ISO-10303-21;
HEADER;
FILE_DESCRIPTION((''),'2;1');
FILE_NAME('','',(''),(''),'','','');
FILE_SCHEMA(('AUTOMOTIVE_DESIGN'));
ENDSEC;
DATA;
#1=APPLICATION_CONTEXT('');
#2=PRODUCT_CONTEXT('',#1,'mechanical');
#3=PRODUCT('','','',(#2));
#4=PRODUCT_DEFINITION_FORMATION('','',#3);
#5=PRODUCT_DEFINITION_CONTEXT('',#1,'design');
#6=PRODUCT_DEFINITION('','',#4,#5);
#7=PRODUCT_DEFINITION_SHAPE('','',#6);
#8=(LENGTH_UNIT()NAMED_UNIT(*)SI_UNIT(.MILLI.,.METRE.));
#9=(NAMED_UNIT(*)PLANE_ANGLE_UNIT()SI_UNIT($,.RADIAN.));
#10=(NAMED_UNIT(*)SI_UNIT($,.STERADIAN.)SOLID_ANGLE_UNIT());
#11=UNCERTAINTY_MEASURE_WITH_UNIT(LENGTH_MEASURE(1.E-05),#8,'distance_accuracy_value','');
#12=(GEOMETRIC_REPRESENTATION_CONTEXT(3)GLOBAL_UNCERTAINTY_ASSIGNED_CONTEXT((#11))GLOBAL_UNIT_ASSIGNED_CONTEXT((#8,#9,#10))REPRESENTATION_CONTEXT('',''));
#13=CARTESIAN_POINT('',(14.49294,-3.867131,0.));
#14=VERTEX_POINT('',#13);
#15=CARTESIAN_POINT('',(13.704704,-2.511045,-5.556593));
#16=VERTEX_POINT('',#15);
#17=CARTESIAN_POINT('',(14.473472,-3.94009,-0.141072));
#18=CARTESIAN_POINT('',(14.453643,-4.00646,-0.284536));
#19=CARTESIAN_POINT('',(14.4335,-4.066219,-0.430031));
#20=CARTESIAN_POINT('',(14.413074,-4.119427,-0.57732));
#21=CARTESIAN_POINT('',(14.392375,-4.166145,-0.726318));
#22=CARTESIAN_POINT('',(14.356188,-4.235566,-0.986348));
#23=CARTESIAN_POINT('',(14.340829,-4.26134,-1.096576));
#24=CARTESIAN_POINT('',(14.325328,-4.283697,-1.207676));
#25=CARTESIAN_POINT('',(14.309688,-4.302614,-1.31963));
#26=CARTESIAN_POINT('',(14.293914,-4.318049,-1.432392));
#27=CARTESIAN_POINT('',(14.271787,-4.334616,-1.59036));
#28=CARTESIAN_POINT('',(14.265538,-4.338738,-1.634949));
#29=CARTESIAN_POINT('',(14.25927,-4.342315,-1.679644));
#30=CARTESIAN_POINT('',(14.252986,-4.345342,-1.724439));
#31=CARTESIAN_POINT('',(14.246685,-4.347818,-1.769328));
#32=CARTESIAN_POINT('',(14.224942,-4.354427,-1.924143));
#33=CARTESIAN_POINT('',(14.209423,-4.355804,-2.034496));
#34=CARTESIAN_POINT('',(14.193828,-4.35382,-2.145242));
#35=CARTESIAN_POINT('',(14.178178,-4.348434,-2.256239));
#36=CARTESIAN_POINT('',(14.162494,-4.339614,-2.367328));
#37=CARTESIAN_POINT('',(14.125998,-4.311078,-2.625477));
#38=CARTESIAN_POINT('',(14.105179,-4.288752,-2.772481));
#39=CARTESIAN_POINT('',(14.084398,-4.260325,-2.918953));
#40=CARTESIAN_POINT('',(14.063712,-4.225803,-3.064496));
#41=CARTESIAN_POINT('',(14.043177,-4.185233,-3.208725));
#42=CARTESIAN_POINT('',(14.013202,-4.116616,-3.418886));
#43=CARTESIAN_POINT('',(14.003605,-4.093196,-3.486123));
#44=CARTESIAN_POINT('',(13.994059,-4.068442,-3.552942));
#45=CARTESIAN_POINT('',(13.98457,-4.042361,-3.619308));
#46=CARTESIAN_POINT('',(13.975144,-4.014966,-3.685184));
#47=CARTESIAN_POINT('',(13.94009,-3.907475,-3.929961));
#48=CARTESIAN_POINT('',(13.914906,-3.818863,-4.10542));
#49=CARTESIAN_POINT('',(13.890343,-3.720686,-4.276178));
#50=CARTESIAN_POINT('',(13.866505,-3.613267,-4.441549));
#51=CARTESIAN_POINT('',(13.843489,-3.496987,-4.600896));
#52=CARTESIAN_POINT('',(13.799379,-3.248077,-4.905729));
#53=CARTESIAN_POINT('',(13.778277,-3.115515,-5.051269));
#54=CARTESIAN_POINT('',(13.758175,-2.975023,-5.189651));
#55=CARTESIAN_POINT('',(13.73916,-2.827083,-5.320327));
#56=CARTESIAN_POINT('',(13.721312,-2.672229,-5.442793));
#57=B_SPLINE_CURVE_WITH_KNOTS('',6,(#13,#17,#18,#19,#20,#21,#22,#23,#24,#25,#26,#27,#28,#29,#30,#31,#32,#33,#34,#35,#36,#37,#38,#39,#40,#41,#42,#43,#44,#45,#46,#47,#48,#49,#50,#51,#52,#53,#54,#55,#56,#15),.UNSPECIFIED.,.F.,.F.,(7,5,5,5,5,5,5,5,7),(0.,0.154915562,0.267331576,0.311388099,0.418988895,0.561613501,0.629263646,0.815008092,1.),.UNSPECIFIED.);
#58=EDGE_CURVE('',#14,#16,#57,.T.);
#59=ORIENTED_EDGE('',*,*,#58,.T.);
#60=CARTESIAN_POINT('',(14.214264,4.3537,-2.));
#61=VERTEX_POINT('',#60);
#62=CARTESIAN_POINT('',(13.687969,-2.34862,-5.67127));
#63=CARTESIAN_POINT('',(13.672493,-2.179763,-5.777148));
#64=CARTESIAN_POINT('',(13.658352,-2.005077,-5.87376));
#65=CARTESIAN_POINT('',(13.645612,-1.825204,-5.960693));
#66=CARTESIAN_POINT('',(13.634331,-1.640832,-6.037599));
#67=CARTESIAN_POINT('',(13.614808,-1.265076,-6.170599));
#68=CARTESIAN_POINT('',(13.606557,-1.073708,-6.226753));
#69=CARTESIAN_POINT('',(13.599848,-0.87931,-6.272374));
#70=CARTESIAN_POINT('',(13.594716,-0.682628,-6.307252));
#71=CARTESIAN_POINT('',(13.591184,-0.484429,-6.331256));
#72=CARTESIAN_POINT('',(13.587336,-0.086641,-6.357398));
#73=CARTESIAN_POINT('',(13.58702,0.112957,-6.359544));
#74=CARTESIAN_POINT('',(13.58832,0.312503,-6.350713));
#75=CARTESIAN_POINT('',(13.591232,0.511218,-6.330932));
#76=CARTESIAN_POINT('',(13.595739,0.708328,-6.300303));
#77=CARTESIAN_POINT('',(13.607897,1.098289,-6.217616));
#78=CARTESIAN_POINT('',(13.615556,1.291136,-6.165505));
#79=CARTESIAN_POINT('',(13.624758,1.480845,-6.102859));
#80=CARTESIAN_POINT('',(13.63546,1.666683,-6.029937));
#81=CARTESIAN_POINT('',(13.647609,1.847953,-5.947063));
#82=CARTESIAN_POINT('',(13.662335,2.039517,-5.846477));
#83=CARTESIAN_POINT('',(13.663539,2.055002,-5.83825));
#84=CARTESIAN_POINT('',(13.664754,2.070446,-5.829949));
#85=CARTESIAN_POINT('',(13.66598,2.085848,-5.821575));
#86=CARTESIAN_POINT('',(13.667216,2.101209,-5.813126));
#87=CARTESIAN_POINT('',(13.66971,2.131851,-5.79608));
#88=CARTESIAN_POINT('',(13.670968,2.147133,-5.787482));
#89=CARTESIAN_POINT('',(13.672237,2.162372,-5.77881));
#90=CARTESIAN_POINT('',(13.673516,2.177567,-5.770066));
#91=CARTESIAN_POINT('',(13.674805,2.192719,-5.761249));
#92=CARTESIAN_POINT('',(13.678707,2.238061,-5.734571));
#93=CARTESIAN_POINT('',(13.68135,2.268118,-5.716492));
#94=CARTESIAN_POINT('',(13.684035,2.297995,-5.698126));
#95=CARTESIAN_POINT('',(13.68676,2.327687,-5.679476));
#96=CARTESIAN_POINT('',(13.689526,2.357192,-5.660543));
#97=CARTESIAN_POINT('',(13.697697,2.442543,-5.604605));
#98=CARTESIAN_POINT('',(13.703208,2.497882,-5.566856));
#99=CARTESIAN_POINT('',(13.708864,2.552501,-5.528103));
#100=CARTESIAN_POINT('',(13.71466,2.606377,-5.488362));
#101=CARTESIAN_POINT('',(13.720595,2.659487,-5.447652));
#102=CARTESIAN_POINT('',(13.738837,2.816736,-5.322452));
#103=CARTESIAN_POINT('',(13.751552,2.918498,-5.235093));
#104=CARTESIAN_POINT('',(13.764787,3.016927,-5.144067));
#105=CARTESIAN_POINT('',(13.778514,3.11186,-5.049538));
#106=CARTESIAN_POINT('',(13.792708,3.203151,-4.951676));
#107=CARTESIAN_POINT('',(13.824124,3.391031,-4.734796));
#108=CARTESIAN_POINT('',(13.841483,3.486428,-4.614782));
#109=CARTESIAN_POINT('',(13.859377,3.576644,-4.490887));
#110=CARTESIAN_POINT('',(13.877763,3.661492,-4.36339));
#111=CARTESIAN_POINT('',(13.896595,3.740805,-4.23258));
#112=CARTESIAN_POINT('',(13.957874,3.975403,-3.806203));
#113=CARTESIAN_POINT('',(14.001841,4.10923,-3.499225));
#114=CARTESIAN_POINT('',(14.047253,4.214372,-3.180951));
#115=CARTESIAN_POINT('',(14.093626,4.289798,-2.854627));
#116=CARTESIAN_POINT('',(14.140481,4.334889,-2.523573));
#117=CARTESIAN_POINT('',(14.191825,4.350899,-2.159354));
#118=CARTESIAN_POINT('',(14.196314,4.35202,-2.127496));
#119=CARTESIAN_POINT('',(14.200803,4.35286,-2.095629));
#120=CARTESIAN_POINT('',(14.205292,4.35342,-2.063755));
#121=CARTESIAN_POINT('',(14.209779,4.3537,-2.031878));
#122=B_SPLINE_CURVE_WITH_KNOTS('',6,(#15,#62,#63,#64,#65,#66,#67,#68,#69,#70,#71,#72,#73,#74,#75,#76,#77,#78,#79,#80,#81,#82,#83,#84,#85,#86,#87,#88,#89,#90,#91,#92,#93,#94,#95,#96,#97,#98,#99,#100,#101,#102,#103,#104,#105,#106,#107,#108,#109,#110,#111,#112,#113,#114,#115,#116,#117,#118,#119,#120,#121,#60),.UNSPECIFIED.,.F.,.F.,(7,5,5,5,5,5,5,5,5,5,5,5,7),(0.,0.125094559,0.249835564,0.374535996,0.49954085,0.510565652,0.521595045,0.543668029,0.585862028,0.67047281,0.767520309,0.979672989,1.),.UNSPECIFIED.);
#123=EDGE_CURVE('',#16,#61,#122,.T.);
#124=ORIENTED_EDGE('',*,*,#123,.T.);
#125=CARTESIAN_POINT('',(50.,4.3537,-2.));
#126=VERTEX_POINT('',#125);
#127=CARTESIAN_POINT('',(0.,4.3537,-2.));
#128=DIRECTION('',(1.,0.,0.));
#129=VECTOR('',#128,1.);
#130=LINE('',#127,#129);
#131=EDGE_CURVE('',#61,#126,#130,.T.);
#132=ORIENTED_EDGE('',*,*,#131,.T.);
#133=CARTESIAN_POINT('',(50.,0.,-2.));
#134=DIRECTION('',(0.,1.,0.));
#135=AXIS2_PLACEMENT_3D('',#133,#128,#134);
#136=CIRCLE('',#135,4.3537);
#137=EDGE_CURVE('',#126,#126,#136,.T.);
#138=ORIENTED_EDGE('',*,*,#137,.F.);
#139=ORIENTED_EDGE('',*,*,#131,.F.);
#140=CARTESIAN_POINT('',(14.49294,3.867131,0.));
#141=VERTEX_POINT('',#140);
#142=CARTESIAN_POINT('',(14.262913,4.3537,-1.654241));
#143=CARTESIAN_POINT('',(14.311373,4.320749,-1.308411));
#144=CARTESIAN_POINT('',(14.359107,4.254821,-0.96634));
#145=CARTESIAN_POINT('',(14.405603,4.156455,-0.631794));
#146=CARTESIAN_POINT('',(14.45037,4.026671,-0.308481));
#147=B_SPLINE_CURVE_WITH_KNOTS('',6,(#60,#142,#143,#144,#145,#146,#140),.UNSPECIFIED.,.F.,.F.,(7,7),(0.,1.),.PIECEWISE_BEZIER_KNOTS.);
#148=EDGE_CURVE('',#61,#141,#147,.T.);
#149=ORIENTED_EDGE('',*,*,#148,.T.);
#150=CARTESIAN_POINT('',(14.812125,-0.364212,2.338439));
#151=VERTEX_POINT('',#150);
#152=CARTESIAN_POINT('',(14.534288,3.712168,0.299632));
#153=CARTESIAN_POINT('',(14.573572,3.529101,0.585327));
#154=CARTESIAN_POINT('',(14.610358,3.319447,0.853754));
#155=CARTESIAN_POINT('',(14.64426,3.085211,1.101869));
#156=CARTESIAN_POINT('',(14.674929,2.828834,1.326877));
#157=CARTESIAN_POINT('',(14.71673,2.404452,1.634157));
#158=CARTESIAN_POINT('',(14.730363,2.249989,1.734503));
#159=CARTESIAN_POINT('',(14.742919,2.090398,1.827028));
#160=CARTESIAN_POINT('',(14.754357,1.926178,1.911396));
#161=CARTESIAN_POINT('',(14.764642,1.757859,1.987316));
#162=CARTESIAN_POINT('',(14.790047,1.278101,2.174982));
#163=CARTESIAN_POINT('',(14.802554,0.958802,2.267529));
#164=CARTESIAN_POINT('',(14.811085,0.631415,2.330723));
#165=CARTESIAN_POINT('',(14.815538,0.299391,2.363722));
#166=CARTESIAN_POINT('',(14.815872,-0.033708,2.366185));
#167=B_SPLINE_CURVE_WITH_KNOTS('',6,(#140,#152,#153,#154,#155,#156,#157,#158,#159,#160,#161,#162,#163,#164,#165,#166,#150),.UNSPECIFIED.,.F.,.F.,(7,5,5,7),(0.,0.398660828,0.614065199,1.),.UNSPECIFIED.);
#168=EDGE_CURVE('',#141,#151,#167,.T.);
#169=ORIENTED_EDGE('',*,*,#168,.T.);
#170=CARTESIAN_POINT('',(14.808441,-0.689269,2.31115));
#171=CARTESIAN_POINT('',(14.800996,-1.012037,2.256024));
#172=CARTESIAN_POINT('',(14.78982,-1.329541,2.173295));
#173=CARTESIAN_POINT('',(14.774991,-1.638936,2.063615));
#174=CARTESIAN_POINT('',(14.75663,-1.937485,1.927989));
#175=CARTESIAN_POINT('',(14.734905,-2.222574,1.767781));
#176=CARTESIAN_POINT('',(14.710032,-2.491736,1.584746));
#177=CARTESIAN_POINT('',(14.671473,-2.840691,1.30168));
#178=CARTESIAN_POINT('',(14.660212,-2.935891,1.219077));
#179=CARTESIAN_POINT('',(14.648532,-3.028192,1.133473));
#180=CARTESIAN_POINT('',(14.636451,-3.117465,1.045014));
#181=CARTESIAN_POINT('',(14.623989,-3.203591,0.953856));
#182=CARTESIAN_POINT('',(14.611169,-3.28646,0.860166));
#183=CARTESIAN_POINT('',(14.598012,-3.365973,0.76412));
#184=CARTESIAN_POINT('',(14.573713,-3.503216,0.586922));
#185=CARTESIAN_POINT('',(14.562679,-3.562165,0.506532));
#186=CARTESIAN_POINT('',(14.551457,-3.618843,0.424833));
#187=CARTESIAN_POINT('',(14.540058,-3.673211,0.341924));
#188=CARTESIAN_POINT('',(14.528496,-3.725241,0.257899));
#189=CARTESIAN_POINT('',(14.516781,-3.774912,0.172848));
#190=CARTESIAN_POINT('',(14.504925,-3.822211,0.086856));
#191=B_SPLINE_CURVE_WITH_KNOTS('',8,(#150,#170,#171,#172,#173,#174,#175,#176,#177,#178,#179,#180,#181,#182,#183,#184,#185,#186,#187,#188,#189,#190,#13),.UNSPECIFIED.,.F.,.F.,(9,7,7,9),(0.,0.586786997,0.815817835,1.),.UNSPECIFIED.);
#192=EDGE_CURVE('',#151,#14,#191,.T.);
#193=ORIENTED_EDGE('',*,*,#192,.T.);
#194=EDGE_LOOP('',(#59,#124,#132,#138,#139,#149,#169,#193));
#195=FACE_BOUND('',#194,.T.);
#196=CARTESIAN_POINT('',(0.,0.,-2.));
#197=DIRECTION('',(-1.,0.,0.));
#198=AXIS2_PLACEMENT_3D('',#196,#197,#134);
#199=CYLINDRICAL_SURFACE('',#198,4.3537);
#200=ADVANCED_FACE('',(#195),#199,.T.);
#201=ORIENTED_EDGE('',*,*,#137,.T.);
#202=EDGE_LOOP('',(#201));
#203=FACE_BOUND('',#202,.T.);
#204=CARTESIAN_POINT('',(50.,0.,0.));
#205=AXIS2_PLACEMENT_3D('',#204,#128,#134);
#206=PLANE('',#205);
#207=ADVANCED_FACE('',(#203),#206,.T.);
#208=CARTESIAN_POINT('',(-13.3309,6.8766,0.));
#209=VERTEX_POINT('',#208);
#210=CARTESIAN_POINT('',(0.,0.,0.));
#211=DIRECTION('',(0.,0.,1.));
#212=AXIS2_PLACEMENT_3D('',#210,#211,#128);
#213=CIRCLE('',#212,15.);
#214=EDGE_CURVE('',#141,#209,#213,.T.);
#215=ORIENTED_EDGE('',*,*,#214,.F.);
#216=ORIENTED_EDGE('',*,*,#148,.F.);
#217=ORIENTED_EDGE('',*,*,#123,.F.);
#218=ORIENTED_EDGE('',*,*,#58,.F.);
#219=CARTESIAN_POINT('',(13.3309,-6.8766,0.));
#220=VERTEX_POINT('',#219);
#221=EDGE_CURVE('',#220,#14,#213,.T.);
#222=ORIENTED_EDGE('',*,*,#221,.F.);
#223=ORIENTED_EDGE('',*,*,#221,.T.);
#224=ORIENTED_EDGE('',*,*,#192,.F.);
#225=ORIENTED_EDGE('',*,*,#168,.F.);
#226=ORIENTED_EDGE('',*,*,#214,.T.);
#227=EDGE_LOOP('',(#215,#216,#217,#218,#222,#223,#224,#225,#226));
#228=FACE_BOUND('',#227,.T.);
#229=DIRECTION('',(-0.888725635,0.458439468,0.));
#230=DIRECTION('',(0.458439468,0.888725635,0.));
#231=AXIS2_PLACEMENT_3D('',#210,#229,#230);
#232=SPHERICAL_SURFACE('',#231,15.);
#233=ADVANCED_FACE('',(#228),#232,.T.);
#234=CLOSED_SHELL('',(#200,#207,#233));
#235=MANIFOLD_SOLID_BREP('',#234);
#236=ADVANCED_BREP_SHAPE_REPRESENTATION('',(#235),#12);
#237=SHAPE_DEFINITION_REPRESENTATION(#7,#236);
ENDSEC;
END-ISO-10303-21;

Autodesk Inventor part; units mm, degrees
ref_plane "YZ Plane" through (0, 0, 0) normal (1, 0, 0) x (0, 1, 0)
ref_plane "XZ Plane" through (0, 0, 0) normal (0, 1, 0) x (-1, 0, 0)
ref_plane "XY Plane" through (0, 0, 0) normal (0, 0, 1) x (1, 0, 0)
sketch "草圖1" plane through (0, 0, 0) normal (0, 0, 1) x (1, 0, 0)
  circle A0 centre (0, 0) radius 15
  line L0 (13.3309, -6.8766) -> (-13.3309, 6.8766)
  dimension "d0" = 30
revolve "迴轉1" add sketch "草圖1" angle 360 about axis through (13.3309, -6.8766, 0) along (-0.8887264, 0.4584381, 0) picked at (5.5976, 4.8304) contours A0 L0
sketch "草圖2" plane through (0, 0, 0) normal (1, 0, 0) x (0, 1, 0)
  circle A0 centre (0, -2) radius 4.3537
  point P0 (0, 0)
  dimension "d2" = 2
extrude "擠出1" add sketch "草圖2" along normal blind 50
properties part number "Input_Shaft"
